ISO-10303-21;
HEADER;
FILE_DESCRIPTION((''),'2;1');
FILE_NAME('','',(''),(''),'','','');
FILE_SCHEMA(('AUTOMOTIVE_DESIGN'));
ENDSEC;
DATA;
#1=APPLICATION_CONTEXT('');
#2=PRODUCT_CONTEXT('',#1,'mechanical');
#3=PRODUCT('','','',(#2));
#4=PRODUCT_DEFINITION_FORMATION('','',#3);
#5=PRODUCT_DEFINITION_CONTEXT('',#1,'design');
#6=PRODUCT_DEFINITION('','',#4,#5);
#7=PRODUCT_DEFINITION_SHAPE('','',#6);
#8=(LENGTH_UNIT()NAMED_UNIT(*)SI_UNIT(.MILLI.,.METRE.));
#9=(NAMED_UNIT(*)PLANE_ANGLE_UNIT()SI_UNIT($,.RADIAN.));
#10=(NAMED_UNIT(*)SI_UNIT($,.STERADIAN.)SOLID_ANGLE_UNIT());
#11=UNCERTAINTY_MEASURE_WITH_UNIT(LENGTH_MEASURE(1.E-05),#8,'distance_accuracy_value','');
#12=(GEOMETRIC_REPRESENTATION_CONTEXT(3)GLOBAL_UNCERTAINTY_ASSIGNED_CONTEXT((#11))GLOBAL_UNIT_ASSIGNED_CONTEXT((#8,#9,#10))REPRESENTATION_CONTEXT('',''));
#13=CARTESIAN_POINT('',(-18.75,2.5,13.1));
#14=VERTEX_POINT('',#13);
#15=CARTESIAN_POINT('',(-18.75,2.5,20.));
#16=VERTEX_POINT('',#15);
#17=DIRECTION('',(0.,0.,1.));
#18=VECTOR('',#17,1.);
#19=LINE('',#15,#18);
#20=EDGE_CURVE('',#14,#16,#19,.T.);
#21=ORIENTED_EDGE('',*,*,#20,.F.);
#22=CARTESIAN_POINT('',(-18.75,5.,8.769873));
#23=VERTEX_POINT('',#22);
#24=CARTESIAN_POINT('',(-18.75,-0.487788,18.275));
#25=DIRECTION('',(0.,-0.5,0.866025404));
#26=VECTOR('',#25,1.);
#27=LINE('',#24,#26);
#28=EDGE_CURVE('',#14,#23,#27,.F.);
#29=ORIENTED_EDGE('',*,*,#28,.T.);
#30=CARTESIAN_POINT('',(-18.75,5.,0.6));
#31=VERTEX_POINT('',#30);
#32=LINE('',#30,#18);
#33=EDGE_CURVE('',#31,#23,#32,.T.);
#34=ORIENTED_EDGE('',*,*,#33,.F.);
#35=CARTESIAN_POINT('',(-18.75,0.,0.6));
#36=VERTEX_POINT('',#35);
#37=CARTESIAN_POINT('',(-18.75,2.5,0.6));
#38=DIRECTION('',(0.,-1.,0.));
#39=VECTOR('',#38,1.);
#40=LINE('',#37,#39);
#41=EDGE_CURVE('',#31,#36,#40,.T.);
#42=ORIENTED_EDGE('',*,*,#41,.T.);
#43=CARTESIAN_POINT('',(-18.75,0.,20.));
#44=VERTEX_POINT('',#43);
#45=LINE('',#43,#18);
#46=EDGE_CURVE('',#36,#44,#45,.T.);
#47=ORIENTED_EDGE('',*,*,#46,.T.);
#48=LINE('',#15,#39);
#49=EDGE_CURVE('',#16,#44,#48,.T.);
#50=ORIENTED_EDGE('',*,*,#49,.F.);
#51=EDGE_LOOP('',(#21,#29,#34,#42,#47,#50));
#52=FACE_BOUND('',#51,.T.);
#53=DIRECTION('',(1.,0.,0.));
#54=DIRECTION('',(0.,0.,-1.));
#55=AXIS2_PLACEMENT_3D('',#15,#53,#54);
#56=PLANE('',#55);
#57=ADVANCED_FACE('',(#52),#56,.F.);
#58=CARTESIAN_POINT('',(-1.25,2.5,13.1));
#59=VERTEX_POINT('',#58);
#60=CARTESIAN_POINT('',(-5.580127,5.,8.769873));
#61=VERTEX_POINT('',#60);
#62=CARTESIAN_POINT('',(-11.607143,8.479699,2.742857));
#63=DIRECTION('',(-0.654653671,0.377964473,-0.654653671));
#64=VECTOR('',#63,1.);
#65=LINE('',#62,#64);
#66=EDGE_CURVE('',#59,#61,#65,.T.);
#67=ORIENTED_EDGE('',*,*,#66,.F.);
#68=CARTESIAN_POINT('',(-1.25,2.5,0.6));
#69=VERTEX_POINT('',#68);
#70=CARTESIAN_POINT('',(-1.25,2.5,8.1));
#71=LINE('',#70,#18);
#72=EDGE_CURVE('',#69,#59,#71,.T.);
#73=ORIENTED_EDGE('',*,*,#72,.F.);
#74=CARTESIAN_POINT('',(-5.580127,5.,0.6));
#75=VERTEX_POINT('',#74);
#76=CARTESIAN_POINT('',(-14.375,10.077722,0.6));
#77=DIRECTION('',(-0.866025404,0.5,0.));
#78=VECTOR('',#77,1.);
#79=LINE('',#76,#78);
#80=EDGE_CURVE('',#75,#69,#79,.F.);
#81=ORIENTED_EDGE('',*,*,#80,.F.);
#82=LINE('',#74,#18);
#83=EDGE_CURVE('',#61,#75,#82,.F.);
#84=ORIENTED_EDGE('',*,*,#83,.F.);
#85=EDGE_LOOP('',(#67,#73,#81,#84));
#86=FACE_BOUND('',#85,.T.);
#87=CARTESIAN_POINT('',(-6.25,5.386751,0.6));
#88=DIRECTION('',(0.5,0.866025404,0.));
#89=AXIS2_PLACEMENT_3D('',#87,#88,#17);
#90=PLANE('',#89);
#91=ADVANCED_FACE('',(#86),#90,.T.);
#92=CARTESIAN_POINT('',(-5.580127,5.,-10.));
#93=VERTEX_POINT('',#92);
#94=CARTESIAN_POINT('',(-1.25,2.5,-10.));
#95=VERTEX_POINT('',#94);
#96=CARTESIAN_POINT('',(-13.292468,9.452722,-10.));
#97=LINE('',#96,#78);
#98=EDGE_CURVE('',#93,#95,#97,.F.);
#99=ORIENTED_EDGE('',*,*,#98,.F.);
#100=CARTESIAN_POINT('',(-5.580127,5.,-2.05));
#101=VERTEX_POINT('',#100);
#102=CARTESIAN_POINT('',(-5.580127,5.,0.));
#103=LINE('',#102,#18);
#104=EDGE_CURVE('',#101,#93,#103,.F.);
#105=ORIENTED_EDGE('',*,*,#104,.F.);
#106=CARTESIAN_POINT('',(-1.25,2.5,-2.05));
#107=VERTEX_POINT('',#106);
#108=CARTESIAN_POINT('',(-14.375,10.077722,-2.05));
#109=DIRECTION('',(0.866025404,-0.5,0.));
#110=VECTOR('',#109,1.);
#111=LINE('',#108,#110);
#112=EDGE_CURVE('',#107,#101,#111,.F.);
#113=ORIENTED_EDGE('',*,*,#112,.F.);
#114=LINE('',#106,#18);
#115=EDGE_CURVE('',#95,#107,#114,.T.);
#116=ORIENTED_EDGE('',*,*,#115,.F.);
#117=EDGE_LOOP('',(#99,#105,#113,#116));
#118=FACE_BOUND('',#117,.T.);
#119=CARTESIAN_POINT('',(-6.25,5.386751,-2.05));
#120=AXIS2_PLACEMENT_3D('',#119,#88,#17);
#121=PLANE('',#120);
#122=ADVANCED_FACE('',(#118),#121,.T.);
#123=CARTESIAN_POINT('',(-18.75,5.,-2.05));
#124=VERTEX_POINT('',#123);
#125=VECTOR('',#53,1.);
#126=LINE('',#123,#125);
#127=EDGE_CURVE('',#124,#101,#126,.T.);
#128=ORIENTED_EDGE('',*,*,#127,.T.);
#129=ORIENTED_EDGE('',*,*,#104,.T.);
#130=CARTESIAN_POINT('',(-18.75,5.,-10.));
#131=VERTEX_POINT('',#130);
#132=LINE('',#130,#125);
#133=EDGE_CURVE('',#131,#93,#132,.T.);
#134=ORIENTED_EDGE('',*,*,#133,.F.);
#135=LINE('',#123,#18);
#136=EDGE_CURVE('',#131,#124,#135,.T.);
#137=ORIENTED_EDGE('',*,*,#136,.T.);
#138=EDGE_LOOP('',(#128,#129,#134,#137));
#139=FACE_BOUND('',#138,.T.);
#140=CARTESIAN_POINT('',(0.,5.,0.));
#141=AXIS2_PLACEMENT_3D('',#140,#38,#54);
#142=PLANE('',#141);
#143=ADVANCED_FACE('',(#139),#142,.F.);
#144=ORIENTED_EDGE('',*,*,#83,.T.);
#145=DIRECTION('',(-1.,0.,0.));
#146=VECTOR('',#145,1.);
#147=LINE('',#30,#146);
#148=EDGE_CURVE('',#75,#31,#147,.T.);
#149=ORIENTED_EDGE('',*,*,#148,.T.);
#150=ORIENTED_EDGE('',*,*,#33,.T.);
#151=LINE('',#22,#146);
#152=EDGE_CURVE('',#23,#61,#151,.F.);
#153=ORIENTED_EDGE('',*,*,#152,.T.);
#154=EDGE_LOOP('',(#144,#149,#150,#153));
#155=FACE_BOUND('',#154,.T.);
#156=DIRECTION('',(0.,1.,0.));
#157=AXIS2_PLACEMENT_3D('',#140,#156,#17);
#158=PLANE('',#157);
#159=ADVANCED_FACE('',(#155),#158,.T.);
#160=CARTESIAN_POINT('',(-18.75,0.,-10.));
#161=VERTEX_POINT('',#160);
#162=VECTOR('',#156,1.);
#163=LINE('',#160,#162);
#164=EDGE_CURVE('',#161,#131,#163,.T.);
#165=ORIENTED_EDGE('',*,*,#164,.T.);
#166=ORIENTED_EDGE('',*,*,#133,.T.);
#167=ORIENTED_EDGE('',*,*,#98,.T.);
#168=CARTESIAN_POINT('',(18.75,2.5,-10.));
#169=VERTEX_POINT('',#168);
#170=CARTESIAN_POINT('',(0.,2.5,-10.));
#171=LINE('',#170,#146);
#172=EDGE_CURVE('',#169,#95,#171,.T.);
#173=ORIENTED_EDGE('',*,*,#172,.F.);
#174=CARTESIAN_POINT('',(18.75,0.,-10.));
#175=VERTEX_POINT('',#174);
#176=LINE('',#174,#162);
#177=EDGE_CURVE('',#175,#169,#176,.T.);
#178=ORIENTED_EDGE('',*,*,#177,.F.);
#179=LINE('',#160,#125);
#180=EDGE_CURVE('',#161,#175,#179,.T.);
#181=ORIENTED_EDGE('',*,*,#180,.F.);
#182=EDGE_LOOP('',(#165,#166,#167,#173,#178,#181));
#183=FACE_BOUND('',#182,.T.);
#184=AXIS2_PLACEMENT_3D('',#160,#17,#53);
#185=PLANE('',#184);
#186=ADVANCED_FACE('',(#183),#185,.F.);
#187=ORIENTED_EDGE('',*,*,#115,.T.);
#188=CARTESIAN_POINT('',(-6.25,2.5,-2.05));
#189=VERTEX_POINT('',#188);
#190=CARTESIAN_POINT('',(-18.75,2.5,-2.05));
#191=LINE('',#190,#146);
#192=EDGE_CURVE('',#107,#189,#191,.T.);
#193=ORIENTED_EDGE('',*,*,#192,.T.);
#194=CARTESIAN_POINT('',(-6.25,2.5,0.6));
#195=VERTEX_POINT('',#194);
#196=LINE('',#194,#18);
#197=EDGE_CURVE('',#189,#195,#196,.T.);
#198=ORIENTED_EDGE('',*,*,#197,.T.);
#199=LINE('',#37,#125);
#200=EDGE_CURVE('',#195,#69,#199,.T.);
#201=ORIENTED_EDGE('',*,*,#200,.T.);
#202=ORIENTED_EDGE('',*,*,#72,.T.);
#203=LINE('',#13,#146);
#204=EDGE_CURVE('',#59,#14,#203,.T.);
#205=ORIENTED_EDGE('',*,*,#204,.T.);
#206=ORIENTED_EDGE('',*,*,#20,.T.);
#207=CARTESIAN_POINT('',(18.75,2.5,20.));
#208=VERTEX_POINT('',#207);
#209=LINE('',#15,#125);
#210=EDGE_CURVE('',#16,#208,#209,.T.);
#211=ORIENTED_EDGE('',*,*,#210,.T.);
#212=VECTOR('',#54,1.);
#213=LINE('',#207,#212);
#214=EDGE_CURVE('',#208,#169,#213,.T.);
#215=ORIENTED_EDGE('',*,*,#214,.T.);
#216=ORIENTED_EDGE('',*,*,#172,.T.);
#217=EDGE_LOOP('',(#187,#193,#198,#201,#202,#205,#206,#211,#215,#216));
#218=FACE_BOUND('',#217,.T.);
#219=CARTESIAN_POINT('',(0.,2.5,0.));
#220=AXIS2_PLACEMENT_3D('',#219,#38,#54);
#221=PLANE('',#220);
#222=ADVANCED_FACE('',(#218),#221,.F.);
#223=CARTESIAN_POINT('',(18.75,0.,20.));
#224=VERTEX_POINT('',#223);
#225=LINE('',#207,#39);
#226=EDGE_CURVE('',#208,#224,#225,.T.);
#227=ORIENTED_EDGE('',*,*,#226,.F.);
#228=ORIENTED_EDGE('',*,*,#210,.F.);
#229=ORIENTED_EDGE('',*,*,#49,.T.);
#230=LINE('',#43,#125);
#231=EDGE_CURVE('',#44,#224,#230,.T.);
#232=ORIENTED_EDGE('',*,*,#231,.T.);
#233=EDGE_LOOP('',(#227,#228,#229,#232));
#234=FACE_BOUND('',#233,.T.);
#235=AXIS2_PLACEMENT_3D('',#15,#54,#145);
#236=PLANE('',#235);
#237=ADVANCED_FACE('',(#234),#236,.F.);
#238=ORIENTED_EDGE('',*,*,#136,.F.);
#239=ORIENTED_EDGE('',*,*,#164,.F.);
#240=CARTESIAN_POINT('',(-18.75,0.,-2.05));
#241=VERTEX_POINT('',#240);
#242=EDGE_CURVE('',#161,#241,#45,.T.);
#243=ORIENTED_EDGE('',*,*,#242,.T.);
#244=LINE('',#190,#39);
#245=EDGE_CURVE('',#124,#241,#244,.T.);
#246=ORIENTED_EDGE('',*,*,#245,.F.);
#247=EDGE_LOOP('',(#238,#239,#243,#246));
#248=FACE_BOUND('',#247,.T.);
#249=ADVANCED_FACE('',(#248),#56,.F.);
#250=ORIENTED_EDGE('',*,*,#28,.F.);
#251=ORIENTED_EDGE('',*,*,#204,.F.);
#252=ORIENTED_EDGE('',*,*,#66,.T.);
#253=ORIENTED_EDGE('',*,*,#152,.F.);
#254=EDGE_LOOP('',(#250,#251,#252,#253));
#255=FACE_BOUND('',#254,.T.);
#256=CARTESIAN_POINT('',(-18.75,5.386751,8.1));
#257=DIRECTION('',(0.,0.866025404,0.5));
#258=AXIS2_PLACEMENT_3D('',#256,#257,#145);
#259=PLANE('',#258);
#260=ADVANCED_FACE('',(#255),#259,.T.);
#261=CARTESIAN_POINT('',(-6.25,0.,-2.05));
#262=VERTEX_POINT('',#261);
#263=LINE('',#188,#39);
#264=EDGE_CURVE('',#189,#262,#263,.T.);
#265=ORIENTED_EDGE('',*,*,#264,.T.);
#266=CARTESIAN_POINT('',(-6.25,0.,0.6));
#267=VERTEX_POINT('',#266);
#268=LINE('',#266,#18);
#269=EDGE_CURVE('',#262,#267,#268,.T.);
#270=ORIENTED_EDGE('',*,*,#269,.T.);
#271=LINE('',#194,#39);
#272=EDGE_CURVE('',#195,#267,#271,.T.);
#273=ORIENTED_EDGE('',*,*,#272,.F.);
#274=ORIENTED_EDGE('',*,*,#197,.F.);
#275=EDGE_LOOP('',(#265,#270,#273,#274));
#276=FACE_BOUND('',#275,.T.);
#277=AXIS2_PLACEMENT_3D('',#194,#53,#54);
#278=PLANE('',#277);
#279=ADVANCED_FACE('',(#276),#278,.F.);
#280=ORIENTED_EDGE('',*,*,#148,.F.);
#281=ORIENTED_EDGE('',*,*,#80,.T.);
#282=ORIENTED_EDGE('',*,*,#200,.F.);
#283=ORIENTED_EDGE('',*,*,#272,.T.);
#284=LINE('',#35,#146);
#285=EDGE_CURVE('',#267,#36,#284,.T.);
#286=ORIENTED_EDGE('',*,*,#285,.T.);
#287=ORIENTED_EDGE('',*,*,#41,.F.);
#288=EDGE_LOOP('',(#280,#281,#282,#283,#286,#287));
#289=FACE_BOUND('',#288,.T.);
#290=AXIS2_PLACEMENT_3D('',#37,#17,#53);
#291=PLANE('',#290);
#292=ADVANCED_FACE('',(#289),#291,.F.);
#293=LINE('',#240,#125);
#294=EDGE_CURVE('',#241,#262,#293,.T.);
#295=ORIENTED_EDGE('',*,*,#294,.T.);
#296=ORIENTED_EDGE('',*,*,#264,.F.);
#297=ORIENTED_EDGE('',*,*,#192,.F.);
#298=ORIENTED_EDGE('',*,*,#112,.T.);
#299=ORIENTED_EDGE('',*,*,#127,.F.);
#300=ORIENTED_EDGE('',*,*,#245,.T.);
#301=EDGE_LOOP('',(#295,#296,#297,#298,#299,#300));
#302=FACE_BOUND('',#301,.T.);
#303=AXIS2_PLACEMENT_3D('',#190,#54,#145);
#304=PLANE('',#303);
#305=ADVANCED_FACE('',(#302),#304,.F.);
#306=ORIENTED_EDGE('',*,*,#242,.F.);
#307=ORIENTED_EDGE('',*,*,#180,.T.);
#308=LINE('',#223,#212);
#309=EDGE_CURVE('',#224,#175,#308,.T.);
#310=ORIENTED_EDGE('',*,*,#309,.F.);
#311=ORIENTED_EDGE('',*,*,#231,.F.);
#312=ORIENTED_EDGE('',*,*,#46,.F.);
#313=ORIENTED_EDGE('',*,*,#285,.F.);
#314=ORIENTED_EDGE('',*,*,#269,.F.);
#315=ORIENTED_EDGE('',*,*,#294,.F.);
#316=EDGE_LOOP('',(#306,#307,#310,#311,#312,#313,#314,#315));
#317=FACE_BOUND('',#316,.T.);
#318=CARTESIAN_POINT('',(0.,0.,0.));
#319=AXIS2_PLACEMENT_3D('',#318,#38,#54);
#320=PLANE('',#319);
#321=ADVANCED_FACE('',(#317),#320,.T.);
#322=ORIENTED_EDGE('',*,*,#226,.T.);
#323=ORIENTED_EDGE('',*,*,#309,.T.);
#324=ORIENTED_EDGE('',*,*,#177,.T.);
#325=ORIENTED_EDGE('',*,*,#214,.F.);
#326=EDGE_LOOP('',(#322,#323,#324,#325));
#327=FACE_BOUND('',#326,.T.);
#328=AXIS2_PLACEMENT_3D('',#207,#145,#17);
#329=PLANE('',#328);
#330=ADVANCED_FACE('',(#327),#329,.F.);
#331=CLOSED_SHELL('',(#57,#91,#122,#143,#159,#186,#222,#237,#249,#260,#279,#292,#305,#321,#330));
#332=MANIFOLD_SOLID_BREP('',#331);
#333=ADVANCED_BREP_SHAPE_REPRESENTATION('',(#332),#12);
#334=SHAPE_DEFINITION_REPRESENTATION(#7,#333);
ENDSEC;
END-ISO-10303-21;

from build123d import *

# Parameters (mm, degrees)
SKETCH1_W           = 37.5
SKETCH1_H           = 40
BOSS_EXTRUDE1_DEPTH = 2.5
SKETCH2_W           = 12.5
SKETCH2_H           = 2.65
CUT_EXTRUDE1_DEPTH  = 28.528394432
SKETCH3_W           = 12.5
SKETCH3_H           = 17.95
SKETCH3_H_2         = 7.5
BOSS_EXTRUDE2_DEPTH = 2.5
SKETCH4_W           = 37.5
SKETCH4_H           = 10
CUT_EXTRUDE2_DEPTH  = 28.866871012


with BuildPart() as part:
    # Sketch1 → Boss-Extrude1 (new body)
    with BuildSketch(Plane(origin=(0, 0, 0), x_dir=(1, 0, 0), z_dir=(0, 1, 0))):
        Rectangle(SKETCH1_W, SKETCH1_H)
    extrude(amount=BOSS_EXTRUDE1_DEPTH)

    # Sketch2 → Cut-Extrude1 (cut, through all)
    with BuildSketch(Plane.XZ):
        with Locations((-12.5, -0.725)):
            Rectangle(SKETCH2_W, SKETCH2_H)
    extrude(amount=-CUT_EXTRUDE1_DEPTH, mode=Mode.SUBTRACT)

    # Sketch3 → Boss-Extrude2 (add)
    with BuildSketch(Plane(origin=(0, 2.5, 0), x_dir=(1, 0, 0), z_dir=(0, 1, 0))):
        with Locations((-12.5, 11.025)):
            Rectangle(SKETCH3_W, SKETCH3_H)
        with Locations((-12.5, -4.35)):
            Rectangle(SKETCH3_W, SKETCH3_H_2)
    extrude(amount=BOSS_EXTRUDE2_DEPTH)

    # Sketch4 → Cut-Extrude2 (cut, through all)
    with BuildSketch(Plane(origin=(0, 5, 0), x_dir=(1, 0, 0), z_dir=(0, 1, 0))):
        with Locations((0, 15)):
            Rectangle(SKETCH4_W, SKETCH4_H)
    extrude(amount=-CUT_EXTRUDE2_DEPTH, mode=Mode.SUBTRACT)

    # Chamfer1
    # the kernel refuses this chamfer: 5, 2.886751346 mm, written as the material it adds along each edge
    with BuildSketch(Plane(origin=(-6.25, 2.5, -2.05), x_dir=(0.9998132206222079, -0.019326765612700723, -1.5830863978385058e-15), z_dir=(0, 0, -1))) as chamfer1_piece_1_section:
        with BuildLine():
            Line((5.174171509, 0), (-0.230896973, -2.982845988))
            Line((-0.230896973, -2.982845988), (-0.330878295, -2.980913312))
            ThreePointArc((-0.330878295, -2.980913312), (-0.128843444, -1.491164065), (-0.099981322, 0.001932677))
            Line((-0.099981322, 0.001932677), (0.001932677, 0.099981322))
            ThreePointArc((0.001932677, 0.099981322), (2.588052093, 0.049990661), (5.176104186, 0.099981322))
            Line((5.176104186, 0.099981322), (5.174171509, 0))
        make_face()
    chamfer1_piece_1 = extrude(amount=7.95, mode=Mode.PRIVATE)
    chamfer1_piece_1 = split(chamfer1_piece_1, bisect_by=Plane(origin=(-6.25, 3.354735535, -6.025), z_dir=(1, 0, 0)), keep=Keep.TOP, mode=Mode.PRIVATE)
    chamfer1_piece_1 = split(chamfer1_piece_1, bisect_by=Plane(origin=(-4.46158964, 5, -6.025), z_dir=(0, -1, 0)), keep=Keep.TOP, mode=Mode.PRIVATE)
    add(chamfer1_piece_1)
    with BuildSketch(Plane(origin=(-6.25, 2.5, 8.1), x_dir=(0, -0.019326765612700723, 0.9998132206222079), z_dir=(-1, 0, 0))) as chamfer1_piece_2_section:
        with BuildLine():
            Line((5.174171509, 0), (-0.230896973, 2.982845988))
            Line((-0.230896973, 2.982845988), (-0.330878295, 2.980913312))
            ThreePointArc((-0.330878295, 2.980913312), (-0.128843444, 1.491164065), (-0.099981322, -0.001932677))
            Line((-0.099981322, -0.001932677), (0.001932677, -0.099981322))
            ThreePointArc((0.001932677, -0.099981322), (2.588052093, -0.049990661), (5.176104186, -0.099981322))
            Line((5.176104186, -0.099981322), (5.174171509, 0))
        make_face()
    chamfer1_piece_2 = extrude(amount=12.5, mode=Mode.PRIVATE)
    chamfer1_piece_2 = split(chamfer1_piece_2, bisect_by=Plane(origin=(-12.5, 5, 9.824344196), z_dir=(0, -1, 0)), keep=Keep.TOP, mode=Mode.PRIVATE)
    add(chamfer1_piece_2)
    with BuildSketch(Plane(origin=(-6.25, 2.5, 0.6), x_dir=(0.9998132206222079, -0.019326765612700723, 0), z_dir=(0, 0, 1))) as chamfer1_piece_3_section:
        with BuildLine():
            Line((5.174171509, 0), (-0.230896973, 2.982845988))
            Line((-0.230896973, 2.982845988), (-0.330878295, 2.980913312))
            ThreePointArc((-0.330878295, 2.980913312), (-0.128843444, 1.491164065), (-0.099981322, -0.001932677))
            Line((-0.099981322, -0.001932677), (0.001932677, -0.099981322))
            ThreePointArc((0.001932677, -0.099981322), (2.588052093, -0.049990661), (5.176104186, -0.099981322))
            Line((5.176104186, -0.099981322), (5.174171509, 0))
        make_face()
    chamfer1_piece_3 = extrude(amount=7.5, mode=Mode.PRIVATE)
    chamfer1_piece_3 = split(chamfer1_piece_3, bisect_by=Plane(origin=(-6.25, 3.354735535, 4.35), z_dir=(1, 0, 0)), keep=Keep.TOP, mode=Mode.PRIVATE)
    chamfer1_piece_3 = split(chamfer1_piece_3, bisect_by=Plane(origin=(-4.46158964, 5, 4.35), z_dir=(0, -1, 0)), keep=Keep.TOP, mode=Mode.PRIVATE)
    add(chamfer1_piece_3)
    with BuildSketch(Plane(origin=(-6.25, 2.5, 0.6), x_dir=(0.9998132206222079, -0.019326765612700723, 0), z_dir=(0, 0, 1))) as chamfer1_piece_4a_section:
        with BuildLine():
            Line((5.174171509, 0), (-0.230896973, 2.982845988))
            Line((-0.230896973, 2.982845988), (-0.330878295, 2.980913312))
            ThreePointArc((-0.330878295, 2.980913312), (-0.128843444, 1.491164065), (-0.099981322, -0.001932677))
            Line((-0.099981322, -0.001932677), (0.001932677, -0.099981322))
            ThreePointArc((0.001932677, -0.099981322), (2.588052093, -0.049990661), (5.176104186, -0.099981322))
            Line((5.176104186, -0.099981322), (5.174171509, 0))
        make_face()
    chamfer1_piece_4a = extrude(amount=20.435428773, mode=Mode.PRIVATE)
    chamfer1_piece_4a = split(chamfer1_piece_4a, bisect_by=Plane(origin=(-4.46158964, 3.354735535, 20), z_dir=(0, 0, -1)), keep=Keep.TOP, mode=Mode.PRIVATE)
    chamfer1_piece_4a = split(chamfer1_piece_4a, bisect_by=Plane(origin=(-6.25, 3.354735535, 14.05), z_dir=(1, 0, 0)), keep=Keep.TOP, mode=Mode.PRIVATE)
    chamfer1_piece_4a = split(chamfer1_piece_4a, bisect_by=Plane(origin=(-4.46158964, 5, 14.05), z_dir=(0, -1, 0)), keep=Keep.TOP, mode=Mode.PRIVATE)
    chamfer1_piece_4a = split(chamfer1_piece_4a, bisect_by=Plane(origin=(-4.46158964, 3.354735535, 8.1), z_dir=(0, 0, 1)), keep=Keep.TOP, mode=Mode.PRIVATE)
    with BuildSketch(Plane(origin=(6.685428773, 2.5, 8.1), x_dir=(0, -0.019326765612700723, 0.9998132206222079), z_dir=(-1, 0, 0))) as chamfer1_piece_4b_section:
        with BuildLine():
            Line((5.174171509, 0), (-0.230896973, 2.982845988))
            Line((-0.230896973, 2.982845988), (-0.330878295, 2.980913312))
            ThreePointArc((-0.330878295, 2.980913312), (-0.128843444, 1.491164065), (-0.099981322, -0.001932677))
            Line((-0.099981322, -0.001932677), (0.001932677, -0.099981322))
            ThreePointArc((0.001932677, -0.099981322), (2.588052093, -0.049990661), (5.176104186, -0.099981322))
            Line((5.176104186, -0.099981322), (5.174171509, 0))
        make_face()
    chamfer1_piece_4b = extrude(amount=25.435428773, mode=Mode.PRIVATE)
    chamfer1_piece_4b = split(chamfer1_piece_4b, bisect_by=Plane(origin=(0.217714387, 5, 9.824344196), z_dir=(0, -1, 0)), keep=Keep.TOP, mode=Mode.PRIVATE)
    chamfer1_piece_4b = split(chamfer1_piece_4b, bisect_by=Plane(origin=(-6.25, 3.374002547, 9.824344196), z_dir=(1, 0, 0)), keep=Keep.TOP, mode=Mode.PRIVATE)
    chamfer1_piece_4 = chamfer1_piece_4a & chamfer1_piece_4b
    add(chamfer1_piece_4)


solid = part.part
